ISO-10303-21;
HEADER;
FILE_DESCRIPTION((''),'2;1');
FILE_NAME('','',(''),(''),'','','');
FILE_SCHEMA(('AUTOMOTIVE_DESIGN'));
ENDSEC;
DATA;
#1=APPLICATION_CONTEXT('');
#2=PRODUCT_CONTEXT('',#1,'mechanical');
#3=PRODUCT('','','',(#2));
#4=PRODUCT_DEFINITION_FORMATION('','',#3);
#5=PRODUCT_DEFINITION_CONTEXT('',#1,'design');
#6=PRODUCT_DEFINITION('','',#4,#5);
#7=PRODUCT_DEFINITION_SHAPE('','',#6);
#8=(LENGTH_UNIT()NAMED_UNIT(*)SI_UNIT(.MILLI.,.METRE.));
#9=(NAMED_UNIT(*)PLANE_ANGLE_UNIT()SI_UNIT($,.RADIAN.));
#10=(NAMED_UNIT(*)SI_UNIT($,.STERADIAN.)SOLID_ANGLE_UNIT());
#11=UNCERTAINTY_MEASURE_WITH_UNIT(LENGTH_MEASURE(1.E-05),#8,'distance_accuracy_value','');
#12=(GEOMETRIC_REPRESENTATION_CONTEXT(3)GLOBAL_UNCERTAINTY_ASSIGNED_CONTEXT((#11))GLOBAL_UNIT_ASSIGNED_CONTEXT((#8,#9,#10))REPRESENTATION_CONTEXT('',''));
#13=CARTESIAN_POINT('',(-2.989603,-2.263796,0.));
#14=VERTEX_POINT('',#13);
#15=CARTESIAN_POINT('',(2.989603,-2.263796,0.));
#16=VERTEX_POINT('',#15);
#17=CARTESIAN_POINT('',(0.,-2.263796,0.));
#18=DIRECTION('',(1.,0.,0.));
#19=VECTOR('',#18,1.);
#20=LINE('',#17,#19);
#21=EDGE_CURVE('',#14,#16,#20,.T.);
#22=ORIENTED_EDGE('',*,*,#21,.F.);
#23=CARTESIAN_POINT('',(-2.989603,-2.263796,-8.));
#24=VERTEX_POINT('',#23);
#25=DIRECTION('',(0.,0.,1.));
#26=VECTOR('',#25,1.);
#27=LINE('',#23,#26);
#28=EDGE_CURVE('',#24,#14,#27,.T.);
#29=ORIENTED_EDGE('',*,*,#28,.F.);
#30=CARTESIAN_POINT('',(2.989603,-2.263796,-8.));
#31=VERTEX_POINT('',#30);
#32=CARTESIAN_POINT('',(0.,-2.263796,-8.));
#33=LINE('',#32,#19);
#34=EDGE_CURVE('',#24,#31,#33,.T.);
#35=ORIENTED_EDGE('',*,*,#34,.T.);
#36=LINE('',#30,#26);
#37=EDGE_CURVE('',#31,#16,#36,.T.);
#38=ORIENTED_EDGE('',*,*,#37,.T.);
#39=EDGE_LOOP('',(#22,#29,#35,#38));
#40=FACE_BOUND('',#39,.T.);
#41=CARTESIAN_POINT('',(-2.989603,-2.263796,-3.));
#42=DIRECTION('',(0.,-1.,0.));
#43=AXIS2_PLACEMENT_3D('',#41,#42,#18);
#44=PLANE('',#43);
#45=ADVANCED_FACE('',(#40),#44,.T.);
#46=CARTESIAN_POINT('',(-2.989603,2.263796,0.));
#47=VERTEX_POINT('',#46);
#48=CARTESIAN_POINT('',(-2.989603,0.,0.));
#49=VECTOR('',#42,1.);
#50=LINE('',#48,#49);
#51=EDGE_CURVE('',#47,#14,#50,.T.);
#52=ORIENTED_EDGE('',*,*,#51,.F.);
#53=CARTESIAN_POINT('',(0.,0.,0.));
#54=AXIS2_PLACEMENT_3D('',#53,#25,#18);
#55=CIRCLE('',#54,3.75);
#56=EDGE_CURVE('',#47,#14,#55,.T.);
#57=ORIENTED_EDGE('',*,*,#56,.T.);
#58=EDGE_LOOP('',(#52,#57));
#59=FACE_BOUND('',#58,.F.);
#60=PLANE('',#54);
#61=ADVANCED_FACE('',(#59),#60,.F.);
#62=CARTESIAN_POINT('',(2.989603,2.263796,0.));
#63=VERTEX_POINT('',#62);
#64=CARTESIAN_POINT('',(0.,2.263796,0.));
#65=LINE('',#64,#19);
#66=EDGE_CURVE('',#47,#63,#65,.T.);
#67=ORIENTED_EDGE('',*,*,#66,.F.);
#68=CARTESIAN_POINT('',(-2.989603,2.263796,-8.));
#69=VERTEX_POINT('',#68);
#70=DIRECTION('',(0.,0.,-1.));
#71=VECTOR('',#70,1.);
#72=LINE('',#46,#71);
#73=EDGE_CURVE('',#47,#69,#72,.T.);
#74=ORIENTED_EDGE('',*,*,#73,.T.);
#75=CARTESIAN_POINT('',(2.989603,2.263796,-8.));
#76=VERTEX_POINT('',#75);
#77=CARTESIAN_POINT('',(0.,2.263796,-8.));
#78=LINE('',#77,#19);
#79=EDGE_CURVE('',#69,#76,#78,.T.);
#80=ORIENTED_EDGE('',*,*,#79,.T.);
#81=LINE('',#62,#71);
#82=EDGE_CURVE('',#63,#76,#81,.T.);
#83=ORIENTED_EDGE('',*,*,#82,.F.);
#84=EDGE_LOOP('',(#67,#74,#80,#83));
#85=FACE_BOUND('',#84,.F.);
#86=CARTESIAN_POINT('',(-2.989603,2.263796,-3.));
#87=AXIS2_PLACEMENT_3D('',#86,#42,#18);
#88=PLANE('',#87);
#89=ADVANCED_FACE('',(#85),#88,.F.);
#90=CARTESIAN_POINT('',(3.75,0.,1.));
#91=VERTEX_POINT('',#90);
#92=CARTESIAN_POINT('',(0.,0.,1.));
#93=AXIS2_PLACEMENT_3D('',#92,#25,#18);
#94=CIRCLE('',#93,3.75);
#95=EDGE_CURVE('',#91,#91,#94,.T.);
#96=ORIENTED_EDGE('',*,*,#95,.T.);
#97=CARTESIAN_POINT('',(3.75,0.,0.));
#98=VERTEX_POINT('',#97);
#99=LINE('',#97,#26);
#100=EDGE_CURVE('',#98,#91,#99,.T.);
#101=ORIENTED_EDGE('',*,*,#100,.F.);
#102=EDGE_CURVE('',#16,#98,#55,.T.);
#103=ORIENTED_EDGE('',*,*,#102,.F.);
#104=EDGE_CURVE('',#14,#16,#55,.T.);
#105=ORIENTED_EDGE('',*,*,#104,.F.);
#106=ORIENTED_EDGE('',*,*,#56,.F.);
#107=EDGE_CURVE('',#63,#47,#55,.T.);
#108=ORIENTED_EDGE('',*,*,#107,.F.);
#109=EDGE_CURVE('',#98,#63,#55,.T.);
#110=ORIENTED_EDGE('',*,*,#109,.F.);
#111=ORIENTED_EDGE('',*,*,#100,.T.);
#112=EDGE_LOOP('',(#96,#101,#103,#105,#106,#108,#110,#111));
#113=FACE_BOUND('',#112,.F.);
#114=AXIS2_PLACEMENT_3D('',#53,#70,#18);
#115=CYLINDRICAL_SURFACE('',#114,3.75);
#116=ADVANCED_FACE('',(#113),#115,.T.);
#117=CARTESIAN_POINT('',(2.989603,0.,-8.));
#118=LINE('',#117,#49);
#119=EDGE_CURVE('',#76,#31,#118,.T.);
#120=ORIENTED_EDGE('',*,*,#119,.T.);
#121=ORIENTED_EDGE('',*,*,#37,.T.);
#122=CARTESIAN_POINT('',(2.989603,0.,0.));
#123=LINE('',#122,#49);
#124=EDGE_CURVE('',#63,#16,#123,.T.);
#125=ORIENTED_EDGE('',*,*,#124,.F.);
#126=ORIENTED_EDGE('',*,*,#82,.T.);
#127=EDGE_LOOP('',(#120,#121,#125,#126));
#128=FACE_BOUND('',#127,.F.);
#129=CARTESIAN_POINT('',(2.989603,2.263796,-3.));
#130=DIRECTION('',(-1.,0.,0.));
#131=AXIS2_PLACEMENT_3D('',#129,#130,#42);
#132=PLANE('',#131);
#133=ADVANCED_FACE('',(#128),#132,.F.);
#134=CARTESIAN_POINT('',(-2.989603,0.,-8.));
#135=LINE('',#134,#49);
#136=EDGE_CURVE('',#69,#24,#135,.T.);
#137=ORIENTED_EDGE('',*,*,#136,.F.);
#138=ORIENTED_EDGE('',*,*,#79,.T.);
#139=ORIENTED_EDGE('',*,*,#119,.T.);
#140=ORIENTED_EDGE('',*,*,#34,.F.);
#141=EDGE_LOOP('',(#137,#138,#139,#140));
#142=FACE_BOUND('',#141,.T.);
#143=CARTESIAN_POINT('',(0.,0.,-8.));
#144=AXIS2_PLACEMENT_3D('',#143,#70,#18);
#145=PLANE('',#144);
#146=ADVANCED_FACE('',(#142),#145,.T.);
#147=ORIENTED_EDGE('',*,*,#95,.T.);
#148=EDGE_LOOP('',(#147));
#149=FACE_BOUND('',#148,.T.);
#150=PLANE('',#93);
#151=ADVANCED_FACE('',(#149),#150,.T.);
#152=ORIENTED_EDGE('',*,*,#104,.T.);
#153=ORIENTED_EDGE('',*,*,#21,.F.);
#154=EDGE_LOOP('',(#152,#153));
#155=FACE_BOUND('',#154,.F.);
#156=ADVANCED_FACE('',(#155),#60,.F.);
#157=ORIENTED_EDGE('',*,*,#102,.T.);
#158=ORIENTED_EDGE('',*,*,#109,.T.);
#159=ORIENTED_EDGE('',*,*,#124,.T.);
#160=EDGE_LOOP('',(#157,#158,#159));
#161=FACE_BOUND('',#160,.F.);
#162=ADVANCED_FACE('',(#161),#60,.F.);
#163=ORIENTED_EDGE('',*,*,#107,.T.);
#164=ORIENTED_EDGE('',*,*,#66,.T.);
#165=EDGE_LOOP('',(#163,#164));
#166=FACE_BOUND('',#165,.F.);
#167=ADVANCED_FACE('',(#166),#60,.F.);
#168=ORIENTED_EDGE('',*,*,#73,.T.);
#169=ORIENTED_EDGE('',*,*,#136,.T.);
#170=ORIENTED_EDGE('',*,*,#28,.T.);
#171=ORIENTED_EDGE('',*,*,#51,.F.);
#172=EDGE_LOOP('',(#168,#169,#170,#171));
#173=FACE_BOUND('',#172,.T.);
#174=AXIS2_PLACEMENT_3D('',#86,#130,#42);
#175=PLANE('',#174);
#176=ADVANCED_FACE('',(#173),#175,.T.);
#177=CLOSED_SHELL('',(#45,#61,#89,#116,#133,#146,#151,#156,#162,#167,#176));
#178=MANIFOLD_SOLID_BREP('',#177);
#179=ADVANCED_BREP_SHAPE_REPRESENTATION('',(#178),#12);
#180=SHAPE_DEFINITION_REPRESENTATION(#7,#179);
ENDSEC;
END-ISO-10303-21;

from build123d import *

# Parameters (mm, degrees)
F2_R     = 3.75
F3_DEPTH = 1
F4_W     = 5.9792066569
F4_H     = 4.5275918273
F5_DEPTH = 3
F6_DEPTH = 5


# Not quite as in the source:
# - the program builds the solid bodies; features that only make, move or delete a surface that nothing else refers to are left out


with BuildPart() as f3:
    # F2 (on Top) → F3 (new body)
    with BuildSketch(Plane.XY):
        Circle(F2_R)
    extrude(amount=F3_DEPTH)

    # F4 (on face) → F5 (join)
    with BuildSketch(Plane(origin=(0, 0, 0), x_dir=(1, 0, 0), z_dir=(0, 0, -1))):
        Rectangle(F4_W, F4_H)
    extrude(amount=F5_DEPTH)

    # F6 (add): a face of the model
    f6_faces = [f3.faces().sort_by_distance(p)[0] for p in [
        (0, 0, -3),
    ]]
    extrude(f6_faces, amount=F6_DEPTH)


solid = f3.part
